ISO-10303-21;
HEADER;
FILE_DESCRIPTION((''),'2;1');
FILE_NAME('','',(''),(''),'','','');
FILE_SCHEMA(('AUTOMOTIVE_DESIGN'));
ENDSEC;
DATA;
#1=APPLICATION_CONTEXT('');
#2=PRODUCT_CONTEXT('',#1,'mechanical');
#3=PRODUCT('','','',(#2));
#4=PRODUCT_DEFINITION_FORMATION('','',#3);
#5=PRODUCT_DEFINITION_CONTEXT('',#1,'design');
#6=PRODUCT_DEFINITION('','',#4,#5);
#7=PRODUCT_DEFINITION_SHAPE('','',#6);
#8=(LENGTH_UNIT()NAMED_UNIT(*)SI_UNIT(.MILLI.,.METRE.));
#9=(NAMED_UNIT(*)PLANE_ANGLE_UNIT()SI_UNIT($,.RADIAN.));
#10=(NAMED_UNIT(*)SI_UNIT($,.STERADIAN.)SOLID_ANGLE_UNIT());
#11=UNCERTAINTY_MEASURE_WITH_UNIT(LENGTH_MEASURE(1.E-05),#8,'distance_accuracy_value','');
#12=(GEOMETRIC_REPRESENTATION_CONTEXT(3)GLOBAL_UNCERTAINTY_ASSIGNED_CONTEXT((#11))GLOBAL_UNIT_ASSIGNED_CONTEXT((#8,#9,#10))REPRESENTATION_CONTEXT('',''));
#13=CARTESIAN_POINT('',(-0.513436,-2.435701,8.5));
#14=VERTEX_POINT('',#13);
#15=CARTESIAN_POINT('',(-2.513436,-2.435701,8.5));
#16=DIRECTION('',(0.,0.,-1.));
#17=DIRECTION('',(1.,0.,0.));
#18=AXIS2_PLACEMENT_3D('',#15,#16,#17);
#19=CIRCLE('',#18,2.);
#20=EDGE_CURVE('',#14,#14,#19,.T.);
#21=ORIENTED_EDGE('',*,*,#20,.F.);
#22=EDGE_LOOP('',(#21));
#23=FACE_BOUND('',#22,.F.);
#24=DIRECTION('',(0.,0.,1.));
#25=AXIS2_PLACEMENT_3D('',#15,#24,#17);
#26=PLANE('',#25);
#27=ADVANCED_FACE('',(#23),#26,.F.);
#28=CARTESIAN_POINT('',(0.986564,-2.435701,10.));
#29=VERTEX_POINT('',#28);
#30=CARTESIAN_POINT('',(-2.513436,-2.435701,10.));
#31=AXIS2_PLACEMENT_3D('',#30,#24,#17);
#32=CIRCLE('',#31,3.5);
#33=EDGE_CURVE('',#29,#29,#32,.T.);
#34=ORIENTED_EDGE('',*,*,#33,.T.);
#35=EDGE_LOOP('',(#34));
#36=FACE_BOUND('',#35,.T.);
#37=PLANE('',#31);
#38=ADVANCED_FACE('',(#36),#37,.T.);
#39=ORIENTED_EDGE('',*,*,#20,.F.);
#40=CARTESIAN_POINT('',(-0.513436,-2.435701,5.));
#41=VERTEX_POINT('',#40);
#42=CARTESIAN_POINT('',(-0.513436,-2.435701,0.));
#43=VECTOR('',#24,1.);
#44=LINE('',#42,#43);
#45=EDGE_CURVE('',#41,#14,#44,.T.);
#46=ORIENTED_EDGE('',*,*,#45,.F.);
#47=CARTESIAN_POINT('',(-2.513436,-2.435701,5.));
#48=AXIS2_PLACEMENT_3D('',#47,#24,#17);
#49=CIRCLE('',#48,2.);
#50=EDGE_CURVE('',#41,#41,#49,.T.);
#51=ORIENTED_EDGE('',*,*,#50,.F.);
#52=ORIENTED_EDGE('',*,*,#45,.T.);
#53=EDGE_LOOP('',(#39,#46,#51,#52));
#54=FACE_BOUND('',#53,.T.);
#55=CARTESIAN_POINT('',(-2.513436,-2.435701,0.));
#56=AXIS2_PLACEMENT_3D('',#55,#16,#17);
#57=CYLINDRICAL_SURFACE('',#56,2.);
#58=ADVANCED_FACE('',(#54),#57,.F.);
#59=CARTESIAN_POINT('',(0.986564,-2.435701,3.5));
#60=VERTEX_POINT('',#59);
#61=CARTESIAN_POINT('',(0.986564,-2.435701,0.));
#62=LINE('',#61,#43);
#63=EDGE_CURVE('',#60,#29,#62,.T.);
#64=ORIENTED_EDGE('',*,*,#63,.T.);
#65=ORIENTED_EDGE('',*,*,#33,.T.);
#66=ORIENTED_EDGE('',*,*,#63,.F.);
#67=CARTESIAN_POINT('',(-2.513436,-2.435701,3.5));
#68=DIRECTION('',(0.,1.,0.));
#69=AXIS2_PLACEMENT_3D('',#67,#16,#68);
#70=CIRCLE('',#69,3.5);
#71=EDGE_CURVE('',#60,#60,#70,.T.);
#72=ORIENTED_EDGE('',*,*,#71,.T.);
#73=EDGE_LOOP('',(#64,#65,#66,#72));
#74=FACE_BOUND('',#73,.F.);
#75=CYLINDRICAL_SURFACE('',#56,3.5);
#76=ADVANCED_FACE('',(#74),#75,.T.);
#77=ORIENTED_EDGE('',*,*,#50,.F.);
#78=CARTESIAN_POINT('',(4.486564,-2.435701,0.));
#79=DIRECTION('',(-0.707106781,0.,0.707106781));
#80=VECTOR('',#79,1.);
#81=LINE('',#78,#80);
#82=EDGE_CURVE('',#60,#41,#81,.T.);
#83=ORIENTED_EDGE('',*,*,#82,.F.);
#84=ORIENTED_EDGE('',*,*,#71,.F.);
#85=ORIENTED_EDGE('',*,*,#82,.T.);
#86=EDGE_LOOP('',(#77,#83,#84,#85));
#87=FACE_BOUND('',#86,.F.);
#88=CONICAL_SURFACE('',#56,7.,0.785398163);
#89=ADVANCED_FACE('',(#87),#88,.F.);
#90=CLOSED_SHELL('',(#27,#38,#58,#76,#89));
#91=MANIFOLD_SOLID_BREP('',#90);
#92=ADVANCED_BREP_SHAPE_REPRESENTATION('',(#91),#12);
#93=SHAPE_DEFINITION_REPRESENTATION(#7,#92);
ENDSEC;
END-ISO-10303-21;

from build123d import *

# Parameters (mm, degrees)
F0_R     = 3.5
F1_DEPTH = 10
F2_T     = -1.5


# Not quite as in the source:
# - a fillet or chamfer that OpenCascade refuses, or shapes differently, is made with other operations: its cross-section is extruded or revolved along the edge and cut away or added


with BuildPart() as f1:
    # F0 (on Top) → F1 (new body)
    with BuildSketch(Plane.XY):
        with Locations((-2.5134360774, -2.4357009433)):
            Circle(F0_R)
    extrude(amount=F1_DEPTH)

    # F2
    f2_openings = [f1.faces().sort_by_distance(p)[0] for p in [
        (-2.513436, -2.435701, 0),
    ]]
    offset(amount=F2_T, openings=f2_openings)

    # F3: chamfer of 5 on 1 edges, made by hand

    # F3_s1 → F3_t2 (revolve, cut)
    with BuildSketch(Plane.XZ.offset(2.4357009433)):
        Polygon((4.4865639226, 0), (-0.5134360774, 5), (-0.5134360774, 0), align=None)
    revolve(axis=Axis((-2.5134360774, -2.4357009433, 0), (0, 0, 1)), mode=Mode.SUBTRACT)


solid = f1.part
